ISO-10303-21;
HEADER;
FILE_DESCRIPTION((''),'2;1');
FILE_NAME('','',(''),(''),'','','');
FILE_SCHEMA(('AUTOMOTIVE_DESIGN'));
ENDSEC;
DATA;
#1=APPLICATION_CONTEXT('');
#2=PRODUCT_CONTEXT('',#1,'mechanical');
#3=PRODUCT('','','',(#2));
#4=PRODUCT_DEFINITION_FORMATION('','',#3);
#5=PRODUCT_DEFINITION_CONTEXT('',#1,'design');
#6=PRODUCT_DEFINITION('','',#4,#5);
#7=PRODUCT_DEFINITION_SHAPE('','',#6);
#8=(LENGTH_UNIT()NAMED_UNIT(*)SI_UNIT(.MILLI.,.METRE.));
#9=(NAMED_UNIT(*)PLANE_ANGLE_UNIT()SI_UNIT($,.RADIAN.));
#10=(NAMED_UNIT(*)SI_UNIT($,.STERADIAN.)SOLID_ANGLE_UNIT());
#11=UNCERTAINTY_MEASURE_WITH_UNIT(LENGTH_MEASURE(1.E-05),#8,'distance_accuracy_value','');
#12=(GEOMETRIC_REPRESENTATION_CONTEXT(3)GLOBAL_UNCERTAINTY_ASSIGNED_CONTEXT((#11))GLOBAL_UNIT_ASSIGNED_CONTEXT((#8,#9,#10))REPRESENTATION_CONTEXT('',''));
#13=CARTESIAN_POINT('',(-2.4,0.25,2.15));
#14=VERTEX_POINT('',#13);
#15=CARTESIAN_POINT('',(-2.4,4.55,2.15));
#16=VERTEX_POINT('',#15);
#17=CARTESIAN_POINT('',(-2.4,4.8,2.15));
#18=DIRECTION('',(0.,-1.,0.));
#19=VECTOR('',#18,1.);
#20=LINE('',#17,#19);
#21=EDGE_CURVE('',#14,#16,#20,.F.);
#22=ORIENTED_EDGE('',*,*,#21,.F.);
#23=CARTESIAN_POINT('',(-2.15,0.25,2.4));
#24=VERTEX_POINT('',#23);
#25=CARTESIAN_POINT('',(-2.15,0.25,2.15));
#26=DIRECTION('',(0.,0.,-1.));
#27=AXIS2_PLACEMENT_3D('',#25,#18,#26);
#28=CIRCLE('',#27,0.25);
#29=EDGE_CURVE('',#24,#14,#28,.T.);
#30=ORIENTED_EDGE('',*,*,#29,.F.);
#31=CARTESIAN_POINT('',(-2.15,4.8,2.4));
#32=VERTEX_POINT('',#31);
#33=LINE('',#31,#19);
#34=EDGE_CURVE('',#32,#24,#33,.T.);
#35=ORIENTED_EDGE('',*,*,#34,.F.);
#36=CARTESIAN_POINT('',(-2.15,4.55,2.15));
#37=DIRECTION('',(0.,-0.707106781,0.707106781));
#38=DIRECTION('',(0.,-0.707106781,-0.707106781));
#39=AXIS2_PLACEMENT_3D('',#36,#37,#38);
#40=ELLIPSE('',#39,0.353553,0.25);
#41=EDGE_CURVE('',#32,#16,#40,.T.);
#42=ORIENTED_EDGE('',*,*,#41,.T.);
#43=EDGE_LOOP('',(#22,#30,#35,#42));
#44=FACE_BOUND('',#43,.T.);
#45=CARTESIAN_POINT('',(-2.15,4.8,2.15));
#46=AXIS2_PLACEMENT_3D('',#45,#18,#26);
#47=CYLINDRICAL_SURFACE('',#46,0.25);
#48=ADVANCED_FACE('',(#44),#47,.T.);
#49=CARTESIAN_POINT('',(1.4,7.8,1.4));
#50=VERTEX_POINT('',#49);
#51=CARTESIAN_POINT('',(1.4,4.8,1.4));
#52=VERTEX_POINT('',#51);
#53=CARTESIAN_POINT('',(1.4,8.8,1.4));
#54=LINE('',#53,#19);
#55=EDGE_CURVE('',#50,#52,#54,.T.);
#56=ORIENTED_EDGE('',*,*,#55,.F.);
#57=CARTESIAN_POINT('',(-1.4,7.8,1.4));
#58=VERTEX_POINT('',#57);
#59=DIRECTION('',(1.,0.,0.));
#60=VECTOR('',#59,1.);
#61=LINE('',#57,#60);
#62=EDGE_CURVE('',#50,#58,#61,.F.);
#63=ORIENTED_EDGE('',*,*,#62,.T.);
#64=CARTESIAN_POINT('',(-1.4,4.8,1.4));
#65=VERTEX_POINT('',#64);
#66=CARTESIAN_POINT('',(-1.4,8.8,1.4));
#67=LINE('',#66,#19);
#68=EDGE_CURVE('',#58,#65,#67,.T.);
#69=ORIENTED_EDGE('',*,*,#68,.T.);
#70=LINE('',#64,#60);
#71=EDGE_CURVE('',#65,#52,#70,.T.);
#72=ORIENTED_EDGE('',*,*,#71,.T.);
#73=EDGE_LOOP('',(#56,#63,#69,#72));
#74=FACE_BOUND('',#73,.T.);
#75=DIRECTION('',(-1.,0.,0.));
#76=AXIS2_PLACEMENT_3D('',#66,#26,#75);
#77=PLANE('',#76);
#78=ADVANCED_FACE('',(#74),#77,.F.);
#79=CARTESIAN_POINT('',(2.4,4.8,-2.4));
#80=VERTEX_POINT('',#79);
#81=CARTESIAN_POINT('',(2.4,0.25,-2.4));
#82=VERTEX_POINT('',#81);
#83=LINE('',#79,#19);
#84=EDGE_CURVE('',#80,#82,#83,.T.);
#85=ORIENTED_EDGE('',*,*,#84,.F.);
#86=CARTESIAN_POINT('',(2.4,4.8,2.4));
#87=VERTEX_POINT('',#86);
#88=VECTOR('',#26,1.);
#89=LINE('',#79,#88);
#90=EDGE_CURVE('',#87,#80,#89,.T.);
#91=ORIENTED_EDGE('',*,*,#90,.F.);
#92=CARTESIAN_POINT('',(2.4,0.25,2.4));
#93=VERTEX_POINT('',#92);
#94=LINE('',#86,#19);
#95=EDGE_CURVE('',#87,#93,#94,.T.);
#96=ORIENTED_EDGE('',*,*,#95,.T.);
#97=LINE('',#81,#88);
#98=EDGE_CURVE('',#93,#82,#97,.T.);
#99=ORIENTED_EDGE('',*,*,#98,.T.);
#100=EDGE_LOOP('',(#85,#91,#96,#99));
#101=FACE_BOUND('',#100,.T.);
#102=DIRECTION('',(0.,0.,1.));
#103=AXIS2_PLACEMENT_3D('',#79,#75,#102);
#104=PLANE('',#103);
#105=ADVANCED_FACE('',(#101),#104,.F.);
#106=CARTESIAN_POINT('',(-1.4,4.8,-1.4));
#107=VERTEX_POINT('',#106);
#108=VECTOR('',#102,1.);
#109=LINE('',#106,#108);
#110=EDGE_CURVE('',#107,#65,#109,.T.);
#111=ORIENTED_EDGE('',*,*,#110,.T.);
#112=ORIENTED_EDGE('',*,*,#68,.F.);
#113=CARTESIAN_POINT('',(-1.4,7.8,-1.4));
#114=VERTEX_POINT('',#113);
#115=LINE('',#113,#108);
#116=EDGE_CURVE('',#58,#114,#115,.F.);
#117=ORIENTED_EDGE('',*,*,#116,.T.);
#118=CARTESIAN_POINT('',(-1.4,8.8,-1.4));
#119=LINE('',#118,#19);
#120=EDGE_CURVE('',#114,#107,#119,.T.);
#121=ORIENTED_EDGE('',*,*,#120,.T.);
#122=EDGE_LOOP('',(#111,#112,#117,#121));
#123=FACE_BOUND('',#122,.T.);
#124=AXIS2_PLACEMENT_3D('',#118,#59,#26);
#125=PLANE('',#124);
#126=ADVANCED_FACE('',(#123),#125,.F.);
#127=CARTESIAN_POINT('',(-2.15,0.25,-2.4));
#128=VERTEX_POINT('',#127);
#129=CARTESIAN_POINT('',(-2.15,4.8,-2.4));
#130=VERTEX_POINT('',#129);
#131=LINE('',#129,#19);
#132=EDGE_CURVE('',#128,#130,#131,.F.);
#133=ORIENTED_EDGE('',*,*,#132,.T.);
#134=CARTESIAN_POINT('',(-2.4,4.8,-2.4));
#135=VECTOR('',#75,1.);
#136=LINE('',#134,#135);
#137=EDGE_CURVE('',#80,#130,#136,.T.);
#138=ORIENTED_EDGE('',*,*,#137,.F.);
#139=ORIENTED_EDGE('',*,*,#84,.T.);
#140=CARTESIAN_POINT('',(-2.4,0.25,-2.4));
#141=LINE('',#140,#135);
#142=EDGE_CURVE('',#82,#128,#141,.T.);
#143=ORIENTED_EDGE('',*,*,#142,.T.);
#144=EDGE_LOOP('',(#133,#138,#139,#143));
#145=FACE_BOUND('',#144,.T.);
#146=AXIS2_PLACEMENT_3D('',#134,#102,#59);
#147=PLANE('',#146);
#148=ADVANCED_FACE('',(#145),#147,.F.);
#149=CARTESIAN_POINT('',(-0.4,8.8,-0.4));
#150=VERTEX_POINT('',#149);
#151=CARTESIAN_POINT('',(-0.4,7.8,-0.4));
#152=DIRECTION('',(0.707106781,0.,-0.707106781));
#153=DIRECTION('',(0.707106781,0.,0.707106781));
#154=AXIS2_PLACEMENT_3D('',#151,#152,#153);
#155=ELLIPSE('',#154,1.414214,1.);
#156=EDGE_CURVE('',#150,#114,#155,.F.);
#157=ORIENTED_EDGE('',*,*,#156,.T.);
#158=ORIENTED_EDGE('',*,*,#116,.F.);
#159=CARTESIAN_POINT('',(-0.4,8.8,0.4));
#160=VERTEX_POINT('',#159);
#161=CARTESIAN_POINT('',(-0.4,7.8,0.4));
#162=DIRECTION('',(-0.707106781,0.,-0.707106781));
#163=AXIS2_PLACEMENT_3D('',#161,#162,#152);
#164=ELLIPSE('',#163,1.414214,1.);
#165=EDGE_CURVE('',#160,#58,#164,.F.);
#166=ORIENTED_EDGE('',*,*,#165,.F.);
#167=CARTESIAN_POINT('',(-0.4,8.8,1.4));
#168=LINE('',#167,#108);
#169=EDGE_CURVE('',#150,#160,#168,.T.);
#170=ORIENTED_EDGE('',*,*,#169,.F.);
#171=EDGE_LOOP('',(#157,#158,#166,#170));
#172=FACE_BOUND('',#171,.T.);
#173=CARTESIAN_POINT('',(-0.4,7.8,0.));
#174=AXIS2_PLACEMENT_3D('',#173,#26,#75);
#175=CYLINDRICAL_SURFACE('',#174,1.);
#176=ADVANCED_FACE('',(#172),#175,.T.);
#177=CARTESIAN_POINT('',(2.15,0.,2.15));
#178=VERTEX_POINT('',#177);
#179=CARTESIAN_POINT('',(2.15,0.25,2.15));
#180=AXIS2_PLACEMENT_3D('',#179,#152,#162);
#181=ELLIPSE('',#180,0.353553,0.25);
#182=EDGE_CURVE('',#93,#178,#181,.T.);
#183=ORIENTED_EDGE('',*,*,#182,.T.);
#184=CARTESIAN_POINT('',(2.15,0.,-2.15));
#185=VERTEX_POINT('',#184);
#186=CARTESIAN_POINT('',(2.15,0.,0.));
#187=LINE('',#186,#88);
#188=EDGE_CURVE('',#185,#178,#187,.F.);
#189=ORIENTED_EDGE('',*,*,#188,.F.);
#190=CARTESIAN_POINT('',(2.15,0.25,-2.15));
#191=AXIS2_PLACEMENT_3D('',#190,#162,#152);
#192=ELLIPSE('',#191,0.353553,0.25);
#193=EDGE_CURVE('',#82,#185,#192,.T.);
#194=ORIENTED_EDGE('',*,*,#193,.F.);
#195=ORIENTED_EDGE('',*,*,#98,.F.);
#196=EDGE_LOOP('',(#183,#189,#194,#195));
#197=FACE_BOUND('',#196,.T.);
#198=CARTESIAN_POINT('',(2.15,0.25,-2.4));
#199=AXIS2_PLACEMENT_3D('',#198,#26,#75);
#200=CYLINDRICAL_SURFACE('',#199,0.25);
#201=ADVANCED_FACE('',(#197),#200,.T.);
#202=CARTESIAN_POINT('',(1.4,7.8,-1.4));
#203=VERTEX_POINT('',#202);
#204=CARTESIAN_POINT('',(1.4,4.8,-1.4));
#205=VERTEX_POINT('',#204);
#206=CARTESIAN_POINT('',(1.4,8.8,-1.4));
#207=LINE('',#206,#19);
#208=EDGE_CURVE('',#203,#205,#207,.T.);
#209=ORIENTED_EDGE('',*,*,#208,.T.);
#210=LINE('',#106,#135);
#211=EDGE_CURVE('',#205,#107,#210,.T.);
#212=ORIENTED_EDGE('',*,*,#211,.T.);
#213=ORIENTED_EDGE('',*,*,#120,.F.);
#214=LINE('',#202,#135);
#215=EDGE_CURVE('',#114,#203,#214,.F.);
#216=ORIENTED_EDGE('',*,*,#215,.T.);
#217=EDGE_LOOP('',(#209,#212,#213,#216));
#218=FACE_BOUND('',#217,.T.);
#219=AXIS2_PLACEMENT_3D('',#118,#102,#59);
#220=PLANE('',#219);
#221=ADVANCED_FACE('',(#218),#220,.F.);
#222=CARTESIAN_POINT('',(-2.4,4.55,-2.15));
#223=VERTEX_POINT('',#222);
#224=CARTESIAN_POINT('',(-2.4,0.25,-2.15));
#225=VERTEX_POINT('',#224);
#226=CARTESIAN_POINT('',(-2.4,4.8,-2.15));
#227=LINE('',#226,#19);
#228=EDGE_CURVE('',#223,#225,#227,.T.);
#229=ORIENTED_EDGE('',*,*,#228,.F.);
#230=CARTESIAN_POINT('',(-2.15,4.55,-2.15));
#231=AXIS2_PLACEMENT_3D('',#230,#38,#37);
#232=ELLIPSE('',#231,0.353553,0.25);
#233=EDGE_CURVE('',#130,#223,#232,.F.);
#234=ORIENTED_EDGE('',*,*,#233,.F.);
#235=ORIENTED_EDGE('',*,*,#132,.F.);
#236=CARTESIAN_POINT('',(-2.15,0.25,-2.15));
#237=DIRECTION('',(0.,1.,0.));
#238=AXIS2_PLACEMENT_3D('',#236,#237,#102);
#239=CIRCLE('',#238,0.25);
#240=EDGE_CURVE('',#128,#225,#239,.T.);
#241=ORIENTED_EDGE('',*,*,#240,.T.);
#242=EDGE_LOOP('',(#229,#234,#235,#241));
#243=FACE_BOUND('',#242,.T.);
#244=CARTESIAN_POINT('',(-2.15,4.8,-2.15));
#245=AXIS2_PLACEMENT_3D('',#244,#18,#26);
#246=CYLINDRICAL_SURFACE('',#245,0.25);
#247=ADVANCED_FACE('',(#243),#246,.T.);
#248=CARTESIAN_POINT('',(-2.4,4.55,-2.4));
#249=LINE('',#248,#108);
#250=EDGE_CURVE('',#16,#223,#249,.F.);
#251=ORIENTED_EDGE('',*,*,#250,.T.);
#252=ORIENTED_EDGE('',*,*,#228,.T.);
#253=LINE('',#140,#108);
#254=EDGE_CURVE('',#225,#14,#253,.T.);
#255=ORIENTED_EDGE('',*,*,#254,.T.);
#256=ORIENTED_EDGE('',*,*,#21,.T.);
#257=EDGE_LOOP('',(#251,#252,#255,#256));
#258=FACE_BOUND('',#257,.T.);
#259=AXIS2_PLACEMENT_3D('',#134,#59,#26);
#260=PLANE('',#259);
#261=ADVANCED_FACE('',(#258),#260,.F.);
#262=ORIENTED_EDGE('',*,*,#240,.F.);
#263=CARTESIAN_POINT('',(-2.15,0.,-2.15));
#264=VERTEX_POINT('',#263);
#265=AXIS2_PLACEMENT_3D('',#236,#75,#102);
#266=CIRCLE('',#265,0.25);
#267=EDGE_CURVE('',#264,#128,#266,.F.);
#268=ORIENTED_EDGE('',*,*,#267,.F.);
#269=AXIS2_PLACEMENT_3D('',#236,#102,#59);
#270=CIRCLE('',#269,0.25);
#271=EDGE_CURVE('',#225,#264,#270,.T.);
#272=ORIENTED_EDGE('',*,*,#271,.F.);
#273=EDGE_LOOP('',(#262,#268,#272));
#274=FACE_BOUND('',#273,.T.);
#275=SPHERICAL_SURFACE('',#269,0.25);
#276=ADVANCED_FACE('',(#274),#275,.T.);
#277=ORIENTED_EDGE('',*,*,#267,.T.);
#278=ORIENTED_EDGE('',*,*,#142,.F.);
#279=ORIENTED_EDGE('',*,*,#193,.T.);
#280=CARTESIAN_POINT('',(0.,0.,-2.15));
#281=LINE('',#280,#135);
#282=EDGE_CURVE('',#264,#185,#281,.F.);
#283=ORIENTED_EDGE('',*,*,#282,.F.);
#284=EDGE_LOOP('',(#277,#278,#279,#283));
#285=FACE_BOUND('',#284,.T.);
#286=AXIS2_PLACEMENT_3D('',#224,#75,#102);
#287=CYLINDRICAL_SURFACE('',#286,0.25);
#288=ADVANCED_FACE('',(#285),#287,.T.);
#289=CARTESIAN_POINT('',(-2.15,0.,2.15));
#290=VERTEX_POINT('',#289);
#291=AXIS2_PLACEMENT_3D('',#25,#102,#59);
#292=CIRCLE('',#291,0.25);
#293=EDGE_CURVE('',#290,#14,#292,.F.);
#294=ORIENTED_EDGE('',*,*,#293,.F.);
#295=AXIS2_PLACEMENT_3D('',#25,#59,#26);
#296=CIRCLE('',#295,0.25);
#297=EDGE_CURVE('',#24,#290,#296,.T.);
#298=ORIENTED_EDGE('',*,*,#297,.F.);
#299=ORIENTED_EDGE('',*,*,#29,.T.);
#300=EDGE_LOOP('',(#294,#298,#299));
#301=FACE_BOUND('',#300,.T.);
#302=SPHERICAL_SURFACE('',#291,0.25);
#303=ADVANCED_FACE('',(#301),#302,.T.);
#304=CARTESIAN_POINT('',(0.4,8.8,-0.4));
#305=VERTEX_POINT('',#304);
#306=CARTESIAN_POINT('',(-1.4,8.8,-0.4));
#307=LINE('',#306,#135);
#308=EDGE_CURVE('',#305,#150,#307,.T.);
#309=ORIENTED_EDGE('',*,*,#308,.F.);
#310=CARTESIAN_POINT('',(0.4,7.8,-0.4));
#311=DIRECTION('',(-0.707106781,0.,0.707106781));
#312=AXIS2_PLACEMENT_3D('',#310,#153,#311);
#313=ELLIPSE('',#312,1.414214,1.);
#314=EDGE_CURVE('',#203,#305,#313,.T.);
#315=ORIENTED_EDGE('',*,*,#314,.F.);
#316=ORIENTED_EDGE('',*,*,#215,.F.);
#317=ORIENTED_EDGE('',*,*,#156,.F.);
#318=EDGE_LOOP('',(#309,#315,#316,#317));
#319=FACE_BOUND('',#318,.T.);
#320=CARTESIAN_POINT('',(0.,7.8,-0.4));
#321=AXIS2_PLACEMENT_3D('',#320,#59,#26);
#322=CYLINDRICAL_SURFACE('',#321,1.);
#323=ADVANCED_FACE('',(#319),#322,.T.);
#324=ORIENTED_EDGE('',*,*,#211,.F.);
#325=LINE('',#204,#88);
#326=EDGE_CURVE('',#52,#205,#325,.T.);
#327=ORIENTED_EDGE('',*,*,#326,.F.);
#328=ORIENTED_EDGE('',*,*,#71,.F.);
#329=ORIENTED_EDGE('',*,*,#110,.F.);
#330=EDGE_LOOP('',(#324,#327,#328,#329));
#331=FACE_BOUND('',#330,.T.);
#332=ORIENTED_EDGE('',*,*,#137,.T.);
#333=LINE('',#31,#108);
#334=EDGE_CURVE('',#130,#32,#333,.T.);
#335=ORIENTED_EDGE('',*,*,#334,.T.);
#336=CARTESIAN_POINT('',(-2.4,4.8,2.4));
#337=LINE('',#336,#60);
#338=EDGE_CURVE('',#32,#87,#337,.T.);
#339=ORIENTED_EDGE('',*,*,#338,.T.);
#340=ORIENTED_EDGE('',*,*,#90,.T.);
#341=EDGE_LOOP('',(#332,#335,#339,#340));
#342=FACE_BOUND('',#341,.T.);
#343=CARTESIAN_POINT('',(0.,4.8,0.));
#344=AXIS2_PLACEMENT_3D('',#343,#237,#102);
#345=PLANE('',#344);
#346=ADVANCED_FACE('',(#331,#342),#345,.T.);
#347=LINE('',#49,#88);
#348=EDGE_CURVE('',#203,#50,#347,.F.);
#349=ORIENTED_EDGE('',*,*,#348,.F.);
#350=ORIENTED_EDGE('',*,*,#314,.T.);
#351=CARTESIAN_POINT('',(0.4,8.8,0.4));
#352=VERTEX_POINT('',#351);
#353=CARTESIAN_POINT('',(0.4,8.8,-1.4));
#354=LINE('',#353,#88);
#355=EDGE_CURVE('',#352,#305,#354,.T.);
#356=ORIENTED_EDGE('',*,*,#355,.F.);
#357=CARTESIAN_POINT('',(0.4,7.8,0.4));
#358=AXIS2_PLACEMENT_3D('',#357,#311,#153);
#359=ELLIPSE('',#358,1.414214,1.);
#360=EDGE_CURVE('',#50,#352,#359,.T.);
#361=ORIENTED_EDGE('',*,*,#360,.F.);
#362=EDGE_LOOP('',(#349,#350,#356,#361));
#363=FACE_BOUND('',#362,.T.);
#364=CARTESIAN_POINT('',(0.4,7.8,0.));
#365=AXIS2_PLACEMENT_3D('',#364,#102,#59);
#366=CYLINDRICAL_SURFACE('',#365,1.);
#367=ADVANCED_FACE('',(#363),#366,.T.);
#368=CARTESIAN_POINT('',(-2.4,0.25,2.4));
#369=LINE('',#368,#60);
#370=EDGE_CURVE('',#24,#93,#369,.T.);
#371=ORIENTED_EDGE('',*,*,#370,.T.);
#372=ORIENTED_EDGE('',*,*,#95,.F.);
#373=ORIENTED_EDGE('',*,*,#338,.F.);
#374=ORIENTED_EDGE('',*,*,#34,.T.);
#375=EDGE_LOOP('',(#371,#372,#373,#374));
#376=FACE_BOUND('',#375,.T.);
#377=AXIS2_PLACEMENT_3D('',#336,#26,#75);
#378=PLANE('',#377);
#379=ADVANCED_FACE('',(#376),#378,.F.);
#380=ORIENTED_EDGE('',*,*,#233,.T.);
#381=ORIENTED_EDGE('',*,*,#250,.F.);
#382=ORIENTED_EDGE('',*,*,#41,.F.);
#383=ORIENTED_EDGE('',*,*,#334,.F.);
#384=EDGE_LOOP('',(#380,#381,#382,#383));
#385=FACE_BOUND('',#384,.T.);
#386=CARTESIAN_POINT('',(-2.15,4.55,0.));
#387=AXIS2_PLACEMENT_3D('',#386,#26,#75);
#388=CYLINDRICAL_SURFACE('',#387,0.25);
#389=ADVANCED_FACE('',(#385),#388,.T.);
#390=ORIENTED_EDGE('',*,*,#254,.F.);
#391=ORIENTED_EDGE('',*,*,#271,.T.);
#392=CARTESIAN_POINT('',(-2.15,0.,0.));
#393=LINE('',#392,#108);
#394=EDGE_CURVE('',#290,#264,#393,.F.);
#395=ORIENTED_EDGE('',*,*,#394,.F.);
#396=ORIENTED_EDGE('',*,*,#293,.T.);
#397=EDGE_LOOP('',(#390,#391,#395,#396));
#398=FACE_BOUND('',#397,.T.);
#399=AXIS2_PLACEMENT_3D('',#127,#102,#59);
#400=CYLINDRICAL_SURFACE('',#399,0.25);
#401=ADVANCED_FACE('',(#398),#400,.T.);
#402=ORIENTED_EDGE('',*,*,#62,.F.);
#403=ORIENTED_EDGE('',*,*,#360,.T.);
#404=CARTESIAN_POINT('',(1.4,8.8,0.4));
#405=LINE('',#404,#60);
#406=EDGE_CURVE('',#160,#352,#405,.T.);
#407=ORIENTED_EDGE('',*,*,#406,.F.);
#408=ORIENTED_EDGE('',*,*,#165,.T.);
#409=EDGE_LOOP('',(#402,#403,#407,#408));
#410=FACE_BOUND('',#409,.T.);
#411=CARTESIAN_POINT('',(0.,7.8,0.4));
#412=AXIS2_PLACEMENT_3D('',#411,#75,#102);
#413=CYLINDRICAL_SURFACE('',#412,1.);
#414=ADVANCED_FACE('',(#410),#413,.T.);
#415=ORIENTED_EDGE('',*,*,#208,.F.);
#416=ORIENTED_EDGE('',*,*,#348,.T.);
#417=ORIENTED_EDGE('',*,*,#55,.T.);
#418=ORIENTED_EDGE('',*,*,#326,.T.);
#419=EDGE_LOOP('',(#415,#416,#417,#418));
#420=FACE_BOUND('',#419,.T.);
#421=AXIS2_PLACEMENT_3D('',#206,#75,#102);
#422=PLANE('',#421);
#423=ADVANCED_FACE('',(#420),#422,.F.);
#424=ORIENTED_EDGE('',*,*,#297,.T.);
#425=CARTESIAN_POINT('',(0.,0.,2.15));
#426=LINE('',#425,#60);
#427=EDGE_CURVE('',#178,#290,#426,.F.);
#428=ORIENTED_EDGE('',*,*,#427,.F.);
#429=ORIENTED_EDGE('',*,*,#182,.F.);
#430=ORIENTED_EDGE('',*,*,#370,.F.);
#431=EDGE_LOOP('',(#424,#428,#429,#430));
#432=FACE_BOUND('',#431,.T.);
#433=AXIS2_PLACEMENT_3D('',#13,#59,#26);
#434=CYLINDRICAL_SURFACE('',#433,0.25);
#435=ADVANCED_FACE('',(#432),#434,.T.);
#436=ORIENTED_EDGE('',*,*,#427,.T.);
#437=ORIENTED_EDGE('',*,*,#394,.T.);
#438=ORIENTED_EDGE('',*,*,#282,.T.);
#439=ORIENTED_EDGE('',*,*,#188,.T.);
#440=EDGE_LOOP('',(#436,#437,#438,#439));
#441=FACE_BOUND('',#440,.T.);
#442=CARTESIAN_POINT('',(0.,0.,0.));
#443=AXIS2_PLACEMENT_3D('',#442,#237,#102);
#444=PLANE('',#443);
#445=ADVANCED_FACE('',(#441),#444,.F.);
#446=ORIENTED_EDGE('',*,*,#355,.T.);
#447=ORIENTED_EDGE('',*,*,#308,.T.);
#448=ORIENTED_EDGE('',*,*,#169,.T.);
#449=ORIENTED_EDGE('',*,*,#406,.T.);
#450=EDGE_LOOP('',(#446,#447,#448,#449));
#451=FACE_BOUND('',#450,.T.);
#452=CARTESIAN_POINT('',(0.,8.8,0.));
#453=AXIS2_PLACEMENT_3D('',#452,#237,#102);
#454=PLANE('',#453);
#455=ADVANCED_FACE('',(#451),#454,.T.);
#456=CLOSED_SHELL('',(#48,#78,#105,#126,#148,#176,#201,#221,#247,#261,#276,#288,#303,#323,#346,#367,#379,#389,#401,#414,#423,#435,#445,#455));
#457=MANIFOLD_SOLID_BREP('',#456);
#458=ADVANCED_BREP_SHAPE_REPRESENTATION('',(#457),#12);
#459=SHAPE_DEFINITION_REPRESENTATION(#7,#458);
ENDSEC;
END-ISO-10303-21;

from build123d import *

# Parameters (mm, degrees)
SKETCH1_W           = 4.8
SKETCH1_H           = 4.8
BOSS_EXTRUDE1_DEPTH = 4.8
SKETCH2_W           = 2.8
SKETCH2_H           = 2.8
BOSS_EXTRUDE2_DEPTH = 4
FILLET1_R           = 1
FILLET2_R           = 0.25
FILLET3_R           = 0.25


with BuildPart() as part:
    # Sketch1 → Boss-Extrude1 (new body)
    with BuildSketch(Plane(origin=(0, 0, 0), x_dir=(1, 0, 0), z_dir=(0, 1, 0))):
        Rectangle(SKETCH1_W, SKETCH1_H)
    extrude(amount=BOSS_EXTRUDE1_DEPTH)

    # Sketch2 → Boss-Extrude2 (add)
    with BuildSketch(Plane(origin=(0, 4.8, 0), x_dir=(1, 0, 0), z_dir=(0, 1, 0))):
        Rectangle(SKETCH2_W, SKETCH2_H)
    extrude(amount=BOSS_EXTRUDE2_DEPTH)

    # Fillet1
    fillet1_edges = [part.edges().sort_by_distance(p)[0] for p in [
        (1.4, 8.8, 0),
        (0, 8.8, -1.4),
        (-1.4, 8.8, 0),
        (0, 8.8, 1.4),
    ]]
    fillet(fillet1_edges, radius=FILLET1_R)

    # Fillet2
    fillet2_edges = [part.edges().sort_by_distance(p)[0] for p in [
        (0, 0, 2.4),
        (-2.4, 0, 0),
        (0, 0, -2.4),
        (2.4, 0, 0),
    ]]
    fillet(fillet2_edges, radius=FILLET2_R)

    # Fillet3
    # the kernel refuses this fillet: 0.25 mm, written as the material it takes off along each edge
    with BuildSketch(Plane(origin=(-2.15, 0.25, 2.15), x_dir=(0, 0, 1), z_dir=(-1, 0, 0))) as fillet3_piece_1_section:
        Polygon((0, 0), (FILLET3_R, 0), (FILLET3_R, -FILLET3_R), (0, -FILLET3_R), align=None)
    fillet3_piece_1 = extrude(amount=FILLET3_R, mode=Mode.PRIVATE)
    fillet3_piece_1 = fillet3_piece_1 - Plane(origin=(-2.15, 0.25, 2.15), x_dir=(0, 0.7071067811865475, -0.7071067811865475), z_dir=(-1, 0, 0)) * Sphere(FILLET3_R, mode=Mode.PRIVATE)
    add(fillet3_piece_1, mode=Mode.SUBTRACT)
    with BuildSketch(Plane(origin=(-2.15, 0.25, -2.15), x_dir=(-1, 0, 0), z_dir=(0, 0, -1))) as fillet3_piece_2_section:
        Polygon((0, 0), (FILLET3_R, 0), (FILLET3_R, -FILLET3_R), (0, -FILLET3_R), align=None)
    fillet3_piece_2 = extrude(amount=FILLET3_R, mode=Mode.PRIVATE)
    fillet3_piece_2 = fillet3_piece_2 - Plane(origin=(-2.15, 0.25, -2.15), x_dir=(0.7071067811865475, 0.7071067811865475, 0), z_dir=(0, 0, -1)) * Sphere(FILLET3_R, mode=Mode.PRIVATE)
    add(fillet3_piece_2, mode=Mode.SUBTRACT)
    with BuildSketch(Plane(origin=(-2.4, 4.8, 3.025), x_dir=(0, -1, 0), z_dir=(0, 0, -1))) as fillet3_piece_3:
        with BuildLine():
            CenterArc((FILLET3_R, -FILLET3_R), FILLET3_R, 90, 90)
            Line((0, -FILLET3_R), (0, 0))
            Line((0, 0), (FILLET3_R, 0))
        make_face()
    extrude(amount=6.05, mode=Mode.SUBTRACT)
    with BuildSketch(Plane(origin=(-2.4, 0.25, 2.4), x_dir=(0, 0, -1), z_dir=(0, 1, 0)), Plane(origin=(-2.4, 0.25, -2.4), x_dir=(1, 0, 0), z_dir=(0, 1, 0))) as fillet3_piece_4:
        with BuildLine():
            CenterArc((FILLET3_R, -FILLET3_R), FILLET3_R, 90, 90)
            Line((0, -FILLET3_R), (0, 0))
            Line((0, 0), (FILLET3_R, 0))
        make_face()
    extrude(amount=5.175, mode=Mode.SUBTRACT)


solid = part.part
